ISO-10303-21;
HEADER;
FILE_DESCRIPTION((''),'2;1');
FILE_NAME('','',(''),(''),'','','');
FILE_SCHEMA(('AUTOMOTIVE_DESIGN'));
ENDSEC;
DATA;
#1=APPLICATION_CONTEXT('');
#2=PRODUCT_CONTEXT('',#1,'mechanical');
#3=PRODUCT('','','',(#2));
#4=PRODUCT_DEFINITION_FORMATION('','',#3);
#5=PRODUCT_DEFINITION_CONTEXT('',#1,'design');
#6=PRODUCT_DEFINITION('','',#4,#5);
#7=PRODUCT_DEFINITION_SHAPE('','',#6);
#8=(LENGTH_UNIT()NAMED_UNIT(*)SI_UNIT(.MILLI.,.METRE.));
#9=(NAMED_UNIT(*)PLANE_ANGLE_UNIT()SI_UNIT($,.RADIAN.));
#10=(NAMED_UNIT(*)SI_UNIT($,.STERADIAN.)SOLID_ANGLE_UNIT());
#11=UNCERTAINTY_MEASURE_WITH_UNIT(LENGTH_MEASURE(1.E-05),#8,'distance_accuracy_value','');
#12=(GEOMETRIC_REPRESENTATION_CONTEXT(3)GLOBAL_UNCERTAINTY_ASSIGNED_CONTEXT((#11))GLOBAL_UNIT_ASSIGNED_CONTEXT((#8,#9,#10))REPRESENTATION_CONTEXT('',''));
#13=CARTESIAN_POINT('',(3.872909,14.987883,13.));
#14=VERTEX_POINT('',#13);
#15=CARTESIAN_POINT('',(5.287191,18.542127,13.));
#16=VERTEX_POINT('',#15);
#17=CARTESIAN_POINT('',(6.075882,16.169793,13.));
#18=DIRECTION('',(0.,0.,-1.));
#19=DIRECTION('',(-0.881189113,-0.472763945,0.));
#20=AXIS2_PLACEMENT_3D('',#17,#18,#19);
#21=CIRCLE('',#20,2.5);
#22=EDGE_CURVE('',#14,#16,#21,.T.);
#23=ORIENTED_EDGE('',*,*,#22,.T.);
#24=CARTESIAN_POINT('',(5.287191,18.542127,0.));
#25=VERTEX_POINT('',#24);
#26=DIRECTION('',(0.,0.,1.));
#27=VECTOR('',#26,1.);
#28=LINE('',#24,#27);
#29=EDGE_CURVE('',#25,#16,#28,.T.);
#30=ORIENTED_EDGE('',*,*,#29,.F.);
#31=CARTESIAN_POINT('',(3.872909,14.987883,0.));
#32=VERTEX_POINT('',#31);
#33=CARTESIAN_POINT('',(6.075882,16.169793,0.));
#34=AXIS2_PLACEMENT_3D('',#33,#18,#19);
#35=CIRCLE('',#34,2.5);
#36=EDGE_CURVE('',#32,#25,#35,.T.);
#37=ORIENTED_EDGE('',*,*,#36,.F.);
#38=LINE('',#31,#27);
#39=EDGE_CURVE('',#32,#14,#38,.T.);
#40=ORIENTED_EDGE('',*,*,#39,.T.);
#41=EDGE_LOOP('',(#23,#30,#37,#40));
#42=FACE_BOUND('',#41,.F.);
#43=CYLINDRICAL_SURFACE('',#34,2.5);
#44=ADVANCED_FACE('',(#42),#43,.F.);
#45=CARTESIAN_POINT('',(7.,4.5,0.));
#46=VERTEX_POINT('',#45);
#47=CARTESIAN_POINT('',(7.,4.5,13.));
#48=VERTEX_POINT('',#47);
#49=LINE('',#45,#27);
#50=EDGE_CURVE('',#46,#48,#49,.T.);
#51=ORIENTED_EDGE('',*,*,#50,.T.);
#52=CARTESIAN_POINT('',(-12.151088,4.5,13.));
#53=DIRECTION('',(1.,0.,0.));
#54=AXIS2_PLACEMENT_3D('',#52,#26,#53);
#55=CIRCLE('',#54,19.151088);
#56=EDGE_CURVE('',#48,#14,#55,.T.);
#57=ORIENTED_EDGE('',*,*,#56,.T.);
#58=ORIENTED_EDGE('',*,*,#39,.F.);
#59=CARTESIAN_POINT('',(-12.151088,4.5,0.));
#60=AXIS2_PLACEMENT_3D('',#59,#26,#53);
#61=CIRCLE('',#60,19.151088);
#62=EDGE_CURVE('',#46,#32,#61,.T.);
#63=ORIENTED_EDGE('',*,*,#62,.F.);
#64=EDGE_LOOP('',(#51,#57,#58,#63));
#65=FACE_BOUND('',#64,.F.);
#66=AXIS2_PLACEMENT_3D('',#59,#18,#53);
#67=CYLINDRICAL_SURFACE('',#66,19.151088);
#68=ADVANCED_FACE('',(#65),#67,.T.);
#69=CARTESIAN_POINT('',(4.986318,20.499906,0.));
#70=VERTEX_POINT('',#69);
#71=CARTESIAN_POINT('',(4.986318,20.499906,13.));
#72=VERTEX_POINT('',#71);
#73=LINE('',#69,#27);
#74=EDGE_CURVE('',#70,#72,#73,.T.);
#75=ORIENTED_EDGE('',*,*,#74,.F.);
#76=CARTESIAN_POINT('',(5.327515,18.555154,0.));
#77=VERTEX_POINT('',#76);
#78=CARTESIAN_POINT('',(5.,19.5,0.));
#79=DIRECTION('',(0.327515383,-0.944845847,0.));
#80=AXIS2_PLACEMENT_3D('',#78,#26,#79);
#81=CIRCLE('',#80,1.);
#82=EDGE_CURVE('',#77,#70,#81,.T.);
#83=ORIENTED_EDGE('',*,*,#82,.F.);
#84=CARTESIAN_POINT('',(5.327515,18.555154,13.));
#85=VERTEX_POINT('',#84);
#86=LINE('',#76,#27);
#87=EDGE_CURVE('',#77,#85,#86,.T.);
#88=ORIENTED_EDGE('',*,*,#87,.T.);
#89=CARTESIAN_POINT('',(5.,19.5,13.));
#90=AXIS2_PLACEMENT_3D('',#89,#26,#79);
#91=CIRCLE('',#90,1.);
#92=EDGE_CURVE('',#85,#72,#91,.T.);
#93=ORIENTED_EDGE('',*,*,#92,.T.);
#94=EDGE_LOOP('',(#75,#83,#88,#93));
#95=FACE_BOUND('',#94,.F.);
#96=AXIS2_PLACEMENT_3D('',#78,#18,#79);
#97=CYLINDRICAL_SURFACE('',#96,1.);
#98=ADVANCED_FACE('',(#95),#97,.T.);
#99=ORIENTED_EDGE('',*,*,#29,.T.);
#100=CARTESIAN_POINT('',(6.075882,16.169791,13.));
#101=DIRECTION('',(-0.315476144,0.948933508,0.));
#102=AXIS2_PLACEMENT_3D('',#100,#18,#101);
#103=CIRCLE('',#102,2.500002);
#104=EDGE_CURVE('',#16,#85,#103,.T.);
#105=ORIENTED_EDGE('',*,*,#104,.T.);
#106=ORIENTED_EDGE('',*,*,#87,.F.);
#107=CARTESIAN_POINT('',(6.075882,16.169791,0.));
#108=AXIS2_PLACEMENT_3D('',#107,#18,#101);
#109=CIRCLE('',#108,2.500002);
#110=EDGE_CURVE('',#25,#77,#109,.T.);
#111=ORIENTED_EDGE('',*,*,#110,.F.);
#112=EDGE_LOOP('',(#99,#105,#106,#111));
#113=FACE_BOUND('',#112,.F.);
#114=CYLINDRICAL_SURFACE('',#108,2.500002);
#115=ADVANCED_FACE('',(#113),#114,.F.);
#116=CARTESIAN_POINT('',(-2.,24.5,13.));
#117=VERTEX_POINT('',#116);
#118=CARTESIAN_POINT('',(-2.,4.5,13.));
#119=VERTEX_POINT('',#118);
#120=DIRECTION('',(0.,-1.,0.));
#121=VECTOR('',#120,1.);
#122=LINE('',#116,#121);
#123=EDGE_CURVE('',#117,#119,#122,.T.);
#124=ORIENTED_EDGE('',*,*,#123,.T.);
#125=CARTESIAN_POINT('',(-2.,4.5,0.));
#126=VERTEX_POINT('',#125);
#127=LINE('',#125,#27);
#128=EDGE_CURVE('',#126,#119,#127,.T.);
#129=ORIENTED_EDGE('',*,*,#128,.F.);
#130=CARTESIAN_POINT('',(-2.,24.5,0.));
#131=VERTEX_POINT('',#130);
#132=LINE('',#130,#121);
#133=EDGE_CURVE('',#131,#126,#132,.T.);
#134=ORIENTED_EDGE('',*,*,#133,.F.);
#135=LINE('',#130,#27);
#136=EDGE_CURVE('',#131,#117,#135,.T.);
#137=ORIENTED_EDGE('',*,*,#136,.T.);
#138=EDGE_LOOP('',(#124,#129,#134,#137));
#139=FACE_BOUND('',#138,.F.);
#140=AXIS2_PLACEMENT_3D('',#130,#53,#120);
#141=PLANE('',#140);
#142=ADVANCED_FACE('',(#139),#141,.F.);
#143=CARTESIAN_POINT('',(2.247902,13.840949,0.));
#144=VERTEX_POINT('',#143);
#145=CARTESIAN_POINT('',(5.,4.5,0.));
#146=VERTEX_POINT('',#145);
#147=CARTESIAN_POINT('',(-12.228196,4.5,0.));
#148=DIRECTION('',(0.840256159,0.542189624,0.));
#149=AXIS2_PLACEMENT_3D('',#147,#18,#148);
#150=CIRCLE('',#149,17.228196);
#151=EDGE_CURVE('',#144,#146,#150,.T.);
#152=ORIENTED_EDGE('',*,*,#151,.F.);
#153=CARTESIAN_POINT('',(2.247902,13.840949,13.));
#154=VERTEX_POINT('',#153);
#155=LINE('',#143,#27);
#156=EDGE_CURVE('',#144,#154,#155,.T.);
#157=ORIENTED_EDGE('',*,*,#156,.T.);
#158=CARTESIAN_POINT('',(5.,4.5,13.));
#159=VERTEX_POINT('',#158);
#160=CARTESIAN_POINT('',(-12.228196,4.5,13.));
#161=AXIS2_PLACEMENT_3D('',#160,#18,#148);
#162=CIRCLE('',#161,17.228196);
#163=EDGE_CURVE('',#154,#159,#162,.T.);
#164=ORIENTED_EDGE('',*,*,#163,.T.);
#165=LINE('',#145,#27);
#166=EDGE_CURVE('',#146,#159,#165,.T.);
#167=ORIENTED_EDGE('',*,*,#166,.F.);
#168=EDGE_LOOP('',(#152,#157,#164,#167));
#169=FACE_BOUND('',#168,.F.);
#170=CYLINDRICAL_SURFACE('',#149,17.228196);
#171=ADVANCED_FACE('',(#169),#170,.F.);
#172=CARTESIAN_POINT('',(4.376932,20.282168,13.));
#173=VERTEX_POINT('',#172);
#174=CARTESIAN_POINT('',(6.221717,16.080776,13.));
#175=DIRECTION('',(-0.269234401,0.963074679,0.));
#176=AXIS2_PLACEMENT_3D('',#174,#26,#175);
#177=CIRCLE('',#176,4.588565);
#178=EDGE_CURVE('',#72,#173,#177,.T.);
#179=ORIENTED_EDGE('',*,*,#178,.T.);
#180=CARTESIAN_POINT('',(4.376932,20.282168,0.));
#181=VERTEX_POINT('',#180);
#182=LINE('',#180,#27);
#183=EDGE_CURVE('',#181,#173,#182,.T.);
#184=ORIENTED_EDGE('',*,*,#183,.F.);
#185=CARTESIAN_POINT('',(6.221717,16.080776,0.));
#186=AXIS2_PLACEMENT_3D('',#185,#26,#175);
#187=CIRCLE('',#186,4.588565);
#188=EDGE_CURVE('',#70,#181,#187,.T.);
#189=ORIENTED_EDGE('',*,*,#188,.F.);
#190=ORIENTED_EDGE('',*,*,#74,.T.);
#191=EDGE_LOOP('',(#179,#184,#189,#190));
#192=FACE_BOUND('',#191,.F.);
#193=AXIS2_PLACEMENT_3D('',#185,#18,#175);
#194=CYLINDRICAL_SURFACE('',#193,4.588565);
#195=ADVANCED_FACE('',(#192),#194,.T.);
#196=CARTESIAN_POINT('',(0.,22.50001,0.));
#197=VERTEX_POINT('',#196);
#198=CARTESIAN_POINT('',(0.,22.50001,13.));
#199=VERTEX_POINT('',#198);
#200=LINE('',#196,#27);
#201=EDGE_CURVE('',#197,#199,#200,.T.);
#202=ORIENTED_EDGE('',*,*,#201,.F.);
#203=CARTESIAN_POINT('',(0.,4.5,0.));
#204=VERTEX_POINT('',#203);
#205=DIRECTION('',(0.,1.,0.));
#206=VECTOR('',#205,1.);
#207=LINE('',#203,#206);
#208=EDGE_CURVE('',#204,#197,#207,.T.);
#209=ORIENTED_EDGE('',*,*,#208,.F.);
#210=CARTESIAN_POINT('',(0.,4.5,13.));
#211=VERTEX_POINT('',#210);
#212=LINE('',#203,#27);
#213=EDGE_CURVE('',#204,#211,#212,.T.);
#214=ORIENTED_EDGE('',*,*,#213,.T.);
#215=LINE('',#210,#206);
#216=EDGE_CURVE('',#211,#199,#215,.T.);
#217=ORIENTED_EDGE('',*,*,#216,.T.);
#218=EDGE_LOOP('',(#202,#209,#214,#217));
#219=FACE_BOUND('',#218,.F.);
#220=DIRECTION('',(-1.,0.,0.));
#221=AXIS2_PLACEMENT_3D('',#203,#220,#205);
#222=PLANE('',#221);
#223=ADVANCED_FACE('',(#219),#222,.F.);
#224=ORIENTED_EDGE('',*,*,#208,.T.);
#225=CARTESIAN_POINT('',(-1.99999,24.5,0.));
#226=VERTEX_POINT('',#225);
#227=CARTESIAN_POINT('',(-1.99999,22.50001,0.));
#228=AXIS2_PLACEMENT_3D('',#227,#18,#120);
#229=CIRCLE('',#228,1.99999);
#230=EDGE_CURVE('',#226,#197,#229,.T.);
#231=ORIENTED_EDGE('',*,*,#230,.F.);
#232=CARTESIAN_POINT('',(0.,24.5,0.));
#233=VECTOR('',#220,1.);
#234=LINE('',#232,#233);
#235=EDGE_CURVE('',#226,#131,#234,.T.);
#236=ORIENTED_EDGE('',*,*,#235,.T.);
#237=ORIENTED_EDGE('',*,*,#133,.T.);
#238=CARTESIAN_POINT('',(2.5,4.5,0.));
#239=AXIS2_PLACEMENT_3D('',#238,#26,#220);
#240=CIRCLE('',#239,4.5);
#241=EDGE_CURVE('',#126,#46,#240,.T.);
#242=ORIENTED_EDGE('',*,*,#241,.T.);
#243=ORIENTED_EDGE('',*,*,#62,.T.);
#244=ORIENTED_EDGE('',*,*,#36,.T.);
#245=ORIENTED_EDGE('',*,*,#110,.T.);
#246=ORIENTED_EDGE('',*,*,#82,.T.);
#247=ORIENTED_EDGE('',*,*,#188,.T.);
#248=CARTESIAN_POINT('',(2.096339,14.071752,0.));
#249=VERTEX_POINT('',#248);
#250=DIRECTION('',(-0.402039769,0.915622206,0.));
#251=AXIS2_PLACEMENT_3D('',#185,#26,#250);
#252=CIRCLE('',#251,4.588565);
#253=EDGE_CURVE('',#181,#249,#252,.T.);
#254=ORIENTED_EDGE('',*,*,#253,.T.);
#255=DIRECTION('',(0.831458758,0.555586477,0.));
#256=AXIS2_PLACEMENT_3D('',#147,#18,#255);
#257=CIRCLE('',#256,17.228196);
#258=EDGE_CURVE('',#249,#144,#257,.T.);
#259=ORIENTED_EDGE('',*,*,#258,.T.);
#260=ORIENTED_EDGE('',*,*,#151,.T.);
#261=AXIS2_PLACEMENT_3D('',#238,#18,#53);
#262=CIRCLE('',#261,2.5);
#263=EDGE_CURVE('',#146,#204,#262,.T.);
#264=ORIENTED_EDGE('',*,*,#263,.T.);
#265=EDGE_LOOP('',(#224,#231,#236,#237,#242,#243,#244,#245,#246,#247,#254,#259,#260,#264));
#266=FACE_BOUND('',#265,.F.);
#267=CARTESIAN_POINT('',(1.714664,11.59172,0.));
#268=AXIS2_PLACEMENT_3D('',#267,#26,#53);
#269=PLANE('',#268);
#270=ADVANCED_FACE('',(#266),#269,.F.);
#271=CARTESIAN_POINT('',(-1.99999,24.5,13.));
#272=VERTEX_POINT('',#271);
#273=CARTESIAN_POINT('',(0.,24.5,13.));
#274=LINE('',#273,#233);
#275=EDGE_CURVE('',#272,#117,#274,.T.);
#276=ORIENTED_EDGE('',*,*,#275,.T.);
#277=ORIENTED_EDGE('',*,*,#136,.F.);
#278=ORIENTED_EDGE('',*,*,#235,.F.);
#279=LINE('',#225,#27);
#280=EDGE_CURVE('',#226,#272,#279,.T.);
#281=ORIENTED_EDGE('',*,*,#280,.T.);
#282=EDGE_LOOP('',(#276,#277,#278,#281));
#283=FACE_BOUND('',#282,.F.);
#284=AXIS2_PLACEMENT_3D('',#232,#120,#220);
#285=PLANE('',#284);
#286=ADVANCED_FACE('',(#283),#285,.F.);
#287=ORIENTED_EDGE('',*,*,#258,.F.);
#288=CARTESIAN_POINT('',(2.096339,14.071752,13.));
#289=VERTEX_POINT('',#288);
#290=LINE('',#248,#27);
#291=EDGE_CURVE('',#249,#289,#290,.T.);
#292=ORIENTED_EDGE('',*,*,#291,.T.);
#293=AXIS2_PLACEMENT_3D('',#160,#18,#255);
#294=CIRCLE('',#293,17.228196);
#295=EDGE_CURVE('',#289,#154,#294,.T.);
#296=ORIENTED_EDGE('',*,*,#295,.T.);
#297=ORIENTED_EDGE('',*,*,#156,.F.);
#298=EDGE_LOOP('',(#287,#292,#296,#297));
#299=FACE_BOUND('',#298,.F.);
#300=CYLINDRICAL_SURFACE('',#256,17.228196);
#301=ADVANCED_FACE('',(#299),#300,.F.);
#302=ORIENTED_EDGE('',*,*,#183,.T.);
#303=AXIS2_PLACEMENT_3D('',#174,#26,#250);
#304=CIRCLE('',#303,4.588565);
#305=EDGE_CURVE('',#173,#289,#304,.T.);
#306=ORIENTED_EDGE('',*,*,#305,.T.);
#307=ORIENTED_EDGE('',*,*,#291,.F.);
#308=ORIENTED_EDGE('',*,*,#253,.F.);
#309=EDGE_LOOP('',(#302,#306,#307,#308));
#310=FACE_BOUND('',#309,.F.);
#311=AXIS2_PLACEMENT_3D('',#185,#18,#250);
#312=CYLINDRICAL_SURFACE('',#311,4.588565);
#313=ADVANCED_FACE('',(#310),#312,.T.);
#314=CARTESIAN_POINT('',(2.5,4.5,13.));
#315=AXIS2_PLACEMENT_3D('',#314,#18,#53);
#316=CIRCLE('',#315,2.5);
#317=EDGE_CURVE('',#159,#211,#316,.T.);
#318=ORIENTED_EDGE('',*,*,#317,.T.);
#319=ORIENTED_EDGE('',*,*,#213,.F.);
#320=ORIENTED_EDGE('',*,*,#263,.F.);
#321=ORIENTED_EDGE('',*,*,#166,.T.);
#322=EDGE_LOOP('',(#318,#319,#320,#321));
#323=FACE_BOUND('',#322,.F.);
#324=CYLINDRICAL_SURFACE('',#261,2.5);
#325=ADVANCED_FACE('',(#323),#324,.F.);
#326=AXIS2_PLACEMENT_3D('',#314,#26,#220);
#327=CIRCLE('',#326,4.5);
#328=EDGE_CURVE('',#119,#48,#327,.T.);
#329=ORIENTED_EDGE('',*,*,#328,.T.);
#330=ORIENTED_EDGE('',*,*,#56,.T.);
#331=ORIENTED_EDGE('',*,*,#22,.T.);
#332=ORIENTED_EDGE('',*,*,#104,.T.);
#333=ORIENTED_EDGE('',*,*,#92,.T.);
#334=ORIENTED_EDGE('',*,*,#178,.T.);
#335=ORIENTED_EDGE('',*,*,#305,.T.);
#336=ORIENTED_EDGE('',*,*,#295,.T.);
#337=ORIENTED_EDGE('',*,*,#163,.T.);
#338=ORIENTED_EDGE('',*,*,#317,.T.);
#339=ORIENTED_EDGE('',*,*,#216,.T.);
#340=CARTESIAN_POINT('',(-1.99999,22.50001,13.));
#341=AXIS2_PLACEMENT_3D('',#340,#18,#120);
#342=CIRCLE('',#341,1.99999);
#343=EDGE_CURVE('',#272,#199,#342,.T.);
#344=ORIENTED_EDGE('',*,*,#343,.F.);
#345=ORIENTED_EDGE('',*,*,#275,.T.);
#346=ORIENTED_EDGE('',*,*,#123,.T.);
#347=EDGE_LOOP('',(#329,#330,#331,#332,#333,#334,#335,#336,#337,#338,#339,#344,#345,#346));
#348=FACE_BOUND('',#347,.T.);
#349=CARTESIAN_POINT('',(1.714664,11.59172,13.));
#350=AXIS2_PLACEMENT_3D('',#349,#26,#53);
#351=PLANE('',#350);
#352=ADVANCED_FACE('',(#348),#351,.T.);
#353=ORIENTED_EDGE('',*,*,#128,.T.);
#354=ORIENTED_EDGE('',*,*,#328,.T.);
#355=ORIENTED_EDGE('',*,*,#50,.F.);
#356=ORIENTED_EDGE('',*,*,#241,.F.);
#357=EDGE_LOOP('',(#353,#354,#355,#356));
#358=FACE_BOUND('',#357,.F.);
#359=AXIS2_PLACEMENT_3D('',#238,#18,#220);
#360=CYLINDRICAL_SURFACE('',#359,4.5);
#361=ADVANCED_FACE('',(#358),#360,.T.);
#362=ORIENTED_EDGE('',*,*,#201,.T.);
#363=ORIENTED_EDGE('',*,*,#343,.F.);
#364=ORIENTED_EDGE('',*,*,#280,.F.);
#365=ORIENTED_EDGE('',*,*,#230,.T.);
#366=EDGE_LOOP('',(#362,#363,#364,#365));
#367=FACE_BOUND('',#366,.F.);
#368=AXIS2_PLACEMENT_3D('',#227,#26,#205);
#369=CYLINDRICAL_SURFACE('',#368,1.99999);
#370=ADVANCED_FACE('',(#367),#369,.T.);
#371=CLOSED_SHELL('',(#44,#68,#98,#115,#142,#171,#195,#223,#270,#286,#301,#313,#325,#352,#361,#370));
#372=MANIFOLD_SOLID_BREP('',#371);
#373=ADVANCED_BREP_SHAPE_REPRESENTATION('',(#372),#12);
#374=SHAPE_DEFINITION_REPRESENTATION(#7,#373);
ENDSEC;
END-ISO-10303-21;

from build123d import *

# Parameters (mm, degrees)
F1_DEPTH = 13
F2_R     = 1.99999


# Not quite as in the source:
# - a fillet or chamfer is up to 0.001 mm smaller than in the source, because OpenCascade refuses the exact size


with BuildPart() as f1:
    # F0 (on Top) → F1 (new body)
    with BuildSketch(Plane.XY):
        with BuildLine():
            Line((0, 10), (0, 24.5))
            Line((0, 24.5), (-2, 24.5))
            Line((-2, 24.5), (-2, 4.5))
            ThreePointArc((-2, 4.5), (2.5, 0), (7, 4.5))
            ThreePointArc((7, 4.5), (6.2015841123, 9.9720743607), (3.8729089523, 14.9878831427))
            ThreePointArc((3.8729089523, 14.9878831427), (3.7530227087, 17.0940905495), (5.2871913605, 18.5421267712))
            ThreePointArc((5.2871913605, 18.5421267712), (5.3073257689, 18.5487259027), (5.3275153833, 18.5551541535))
            ThreePointArc((5.3275153833, 18.5551541535), (5.9849559235, 19.6728057544), (4.9863180052, 20.4999063971))
            ThreePointArc((4.9863180052, 20.4999063971), (4.6777817893, 20.4017930021), (4.3769319754, 20.2821676525))
            ThreePointArc((4.3769319754, 20.2821676525), (1.9143946428, 17.6625142897), (2.0963385188, 14.0717524929))
            ThreePointArc((2.0963385188, 14.0717524929), (2.172582587, 13.95665433), (2.2479018586, 13.8409488747))
            ThreePointArc((2.2479018586, 13.8409488747), (4.2976593275, 9.3689672945), (5, 4.5))
            ThreePointArc((5, 4.5), (2.5, 2), (0, 4.5))
            Line((0, 4.5), (0, 10))
        make_face()
    extrude(amount=F1_DEPTH)

    # F2 (radius 2 in the source; OpenCascade refuses exactly that, so slightly less here)
    f2_edges = [f1.edges().sort_by_distance(p)[0] for p in [
        (0, 24.5, 6.5),
    ]]
    fillet(f2_edges, radius=F2_R)


solid = f1.part
